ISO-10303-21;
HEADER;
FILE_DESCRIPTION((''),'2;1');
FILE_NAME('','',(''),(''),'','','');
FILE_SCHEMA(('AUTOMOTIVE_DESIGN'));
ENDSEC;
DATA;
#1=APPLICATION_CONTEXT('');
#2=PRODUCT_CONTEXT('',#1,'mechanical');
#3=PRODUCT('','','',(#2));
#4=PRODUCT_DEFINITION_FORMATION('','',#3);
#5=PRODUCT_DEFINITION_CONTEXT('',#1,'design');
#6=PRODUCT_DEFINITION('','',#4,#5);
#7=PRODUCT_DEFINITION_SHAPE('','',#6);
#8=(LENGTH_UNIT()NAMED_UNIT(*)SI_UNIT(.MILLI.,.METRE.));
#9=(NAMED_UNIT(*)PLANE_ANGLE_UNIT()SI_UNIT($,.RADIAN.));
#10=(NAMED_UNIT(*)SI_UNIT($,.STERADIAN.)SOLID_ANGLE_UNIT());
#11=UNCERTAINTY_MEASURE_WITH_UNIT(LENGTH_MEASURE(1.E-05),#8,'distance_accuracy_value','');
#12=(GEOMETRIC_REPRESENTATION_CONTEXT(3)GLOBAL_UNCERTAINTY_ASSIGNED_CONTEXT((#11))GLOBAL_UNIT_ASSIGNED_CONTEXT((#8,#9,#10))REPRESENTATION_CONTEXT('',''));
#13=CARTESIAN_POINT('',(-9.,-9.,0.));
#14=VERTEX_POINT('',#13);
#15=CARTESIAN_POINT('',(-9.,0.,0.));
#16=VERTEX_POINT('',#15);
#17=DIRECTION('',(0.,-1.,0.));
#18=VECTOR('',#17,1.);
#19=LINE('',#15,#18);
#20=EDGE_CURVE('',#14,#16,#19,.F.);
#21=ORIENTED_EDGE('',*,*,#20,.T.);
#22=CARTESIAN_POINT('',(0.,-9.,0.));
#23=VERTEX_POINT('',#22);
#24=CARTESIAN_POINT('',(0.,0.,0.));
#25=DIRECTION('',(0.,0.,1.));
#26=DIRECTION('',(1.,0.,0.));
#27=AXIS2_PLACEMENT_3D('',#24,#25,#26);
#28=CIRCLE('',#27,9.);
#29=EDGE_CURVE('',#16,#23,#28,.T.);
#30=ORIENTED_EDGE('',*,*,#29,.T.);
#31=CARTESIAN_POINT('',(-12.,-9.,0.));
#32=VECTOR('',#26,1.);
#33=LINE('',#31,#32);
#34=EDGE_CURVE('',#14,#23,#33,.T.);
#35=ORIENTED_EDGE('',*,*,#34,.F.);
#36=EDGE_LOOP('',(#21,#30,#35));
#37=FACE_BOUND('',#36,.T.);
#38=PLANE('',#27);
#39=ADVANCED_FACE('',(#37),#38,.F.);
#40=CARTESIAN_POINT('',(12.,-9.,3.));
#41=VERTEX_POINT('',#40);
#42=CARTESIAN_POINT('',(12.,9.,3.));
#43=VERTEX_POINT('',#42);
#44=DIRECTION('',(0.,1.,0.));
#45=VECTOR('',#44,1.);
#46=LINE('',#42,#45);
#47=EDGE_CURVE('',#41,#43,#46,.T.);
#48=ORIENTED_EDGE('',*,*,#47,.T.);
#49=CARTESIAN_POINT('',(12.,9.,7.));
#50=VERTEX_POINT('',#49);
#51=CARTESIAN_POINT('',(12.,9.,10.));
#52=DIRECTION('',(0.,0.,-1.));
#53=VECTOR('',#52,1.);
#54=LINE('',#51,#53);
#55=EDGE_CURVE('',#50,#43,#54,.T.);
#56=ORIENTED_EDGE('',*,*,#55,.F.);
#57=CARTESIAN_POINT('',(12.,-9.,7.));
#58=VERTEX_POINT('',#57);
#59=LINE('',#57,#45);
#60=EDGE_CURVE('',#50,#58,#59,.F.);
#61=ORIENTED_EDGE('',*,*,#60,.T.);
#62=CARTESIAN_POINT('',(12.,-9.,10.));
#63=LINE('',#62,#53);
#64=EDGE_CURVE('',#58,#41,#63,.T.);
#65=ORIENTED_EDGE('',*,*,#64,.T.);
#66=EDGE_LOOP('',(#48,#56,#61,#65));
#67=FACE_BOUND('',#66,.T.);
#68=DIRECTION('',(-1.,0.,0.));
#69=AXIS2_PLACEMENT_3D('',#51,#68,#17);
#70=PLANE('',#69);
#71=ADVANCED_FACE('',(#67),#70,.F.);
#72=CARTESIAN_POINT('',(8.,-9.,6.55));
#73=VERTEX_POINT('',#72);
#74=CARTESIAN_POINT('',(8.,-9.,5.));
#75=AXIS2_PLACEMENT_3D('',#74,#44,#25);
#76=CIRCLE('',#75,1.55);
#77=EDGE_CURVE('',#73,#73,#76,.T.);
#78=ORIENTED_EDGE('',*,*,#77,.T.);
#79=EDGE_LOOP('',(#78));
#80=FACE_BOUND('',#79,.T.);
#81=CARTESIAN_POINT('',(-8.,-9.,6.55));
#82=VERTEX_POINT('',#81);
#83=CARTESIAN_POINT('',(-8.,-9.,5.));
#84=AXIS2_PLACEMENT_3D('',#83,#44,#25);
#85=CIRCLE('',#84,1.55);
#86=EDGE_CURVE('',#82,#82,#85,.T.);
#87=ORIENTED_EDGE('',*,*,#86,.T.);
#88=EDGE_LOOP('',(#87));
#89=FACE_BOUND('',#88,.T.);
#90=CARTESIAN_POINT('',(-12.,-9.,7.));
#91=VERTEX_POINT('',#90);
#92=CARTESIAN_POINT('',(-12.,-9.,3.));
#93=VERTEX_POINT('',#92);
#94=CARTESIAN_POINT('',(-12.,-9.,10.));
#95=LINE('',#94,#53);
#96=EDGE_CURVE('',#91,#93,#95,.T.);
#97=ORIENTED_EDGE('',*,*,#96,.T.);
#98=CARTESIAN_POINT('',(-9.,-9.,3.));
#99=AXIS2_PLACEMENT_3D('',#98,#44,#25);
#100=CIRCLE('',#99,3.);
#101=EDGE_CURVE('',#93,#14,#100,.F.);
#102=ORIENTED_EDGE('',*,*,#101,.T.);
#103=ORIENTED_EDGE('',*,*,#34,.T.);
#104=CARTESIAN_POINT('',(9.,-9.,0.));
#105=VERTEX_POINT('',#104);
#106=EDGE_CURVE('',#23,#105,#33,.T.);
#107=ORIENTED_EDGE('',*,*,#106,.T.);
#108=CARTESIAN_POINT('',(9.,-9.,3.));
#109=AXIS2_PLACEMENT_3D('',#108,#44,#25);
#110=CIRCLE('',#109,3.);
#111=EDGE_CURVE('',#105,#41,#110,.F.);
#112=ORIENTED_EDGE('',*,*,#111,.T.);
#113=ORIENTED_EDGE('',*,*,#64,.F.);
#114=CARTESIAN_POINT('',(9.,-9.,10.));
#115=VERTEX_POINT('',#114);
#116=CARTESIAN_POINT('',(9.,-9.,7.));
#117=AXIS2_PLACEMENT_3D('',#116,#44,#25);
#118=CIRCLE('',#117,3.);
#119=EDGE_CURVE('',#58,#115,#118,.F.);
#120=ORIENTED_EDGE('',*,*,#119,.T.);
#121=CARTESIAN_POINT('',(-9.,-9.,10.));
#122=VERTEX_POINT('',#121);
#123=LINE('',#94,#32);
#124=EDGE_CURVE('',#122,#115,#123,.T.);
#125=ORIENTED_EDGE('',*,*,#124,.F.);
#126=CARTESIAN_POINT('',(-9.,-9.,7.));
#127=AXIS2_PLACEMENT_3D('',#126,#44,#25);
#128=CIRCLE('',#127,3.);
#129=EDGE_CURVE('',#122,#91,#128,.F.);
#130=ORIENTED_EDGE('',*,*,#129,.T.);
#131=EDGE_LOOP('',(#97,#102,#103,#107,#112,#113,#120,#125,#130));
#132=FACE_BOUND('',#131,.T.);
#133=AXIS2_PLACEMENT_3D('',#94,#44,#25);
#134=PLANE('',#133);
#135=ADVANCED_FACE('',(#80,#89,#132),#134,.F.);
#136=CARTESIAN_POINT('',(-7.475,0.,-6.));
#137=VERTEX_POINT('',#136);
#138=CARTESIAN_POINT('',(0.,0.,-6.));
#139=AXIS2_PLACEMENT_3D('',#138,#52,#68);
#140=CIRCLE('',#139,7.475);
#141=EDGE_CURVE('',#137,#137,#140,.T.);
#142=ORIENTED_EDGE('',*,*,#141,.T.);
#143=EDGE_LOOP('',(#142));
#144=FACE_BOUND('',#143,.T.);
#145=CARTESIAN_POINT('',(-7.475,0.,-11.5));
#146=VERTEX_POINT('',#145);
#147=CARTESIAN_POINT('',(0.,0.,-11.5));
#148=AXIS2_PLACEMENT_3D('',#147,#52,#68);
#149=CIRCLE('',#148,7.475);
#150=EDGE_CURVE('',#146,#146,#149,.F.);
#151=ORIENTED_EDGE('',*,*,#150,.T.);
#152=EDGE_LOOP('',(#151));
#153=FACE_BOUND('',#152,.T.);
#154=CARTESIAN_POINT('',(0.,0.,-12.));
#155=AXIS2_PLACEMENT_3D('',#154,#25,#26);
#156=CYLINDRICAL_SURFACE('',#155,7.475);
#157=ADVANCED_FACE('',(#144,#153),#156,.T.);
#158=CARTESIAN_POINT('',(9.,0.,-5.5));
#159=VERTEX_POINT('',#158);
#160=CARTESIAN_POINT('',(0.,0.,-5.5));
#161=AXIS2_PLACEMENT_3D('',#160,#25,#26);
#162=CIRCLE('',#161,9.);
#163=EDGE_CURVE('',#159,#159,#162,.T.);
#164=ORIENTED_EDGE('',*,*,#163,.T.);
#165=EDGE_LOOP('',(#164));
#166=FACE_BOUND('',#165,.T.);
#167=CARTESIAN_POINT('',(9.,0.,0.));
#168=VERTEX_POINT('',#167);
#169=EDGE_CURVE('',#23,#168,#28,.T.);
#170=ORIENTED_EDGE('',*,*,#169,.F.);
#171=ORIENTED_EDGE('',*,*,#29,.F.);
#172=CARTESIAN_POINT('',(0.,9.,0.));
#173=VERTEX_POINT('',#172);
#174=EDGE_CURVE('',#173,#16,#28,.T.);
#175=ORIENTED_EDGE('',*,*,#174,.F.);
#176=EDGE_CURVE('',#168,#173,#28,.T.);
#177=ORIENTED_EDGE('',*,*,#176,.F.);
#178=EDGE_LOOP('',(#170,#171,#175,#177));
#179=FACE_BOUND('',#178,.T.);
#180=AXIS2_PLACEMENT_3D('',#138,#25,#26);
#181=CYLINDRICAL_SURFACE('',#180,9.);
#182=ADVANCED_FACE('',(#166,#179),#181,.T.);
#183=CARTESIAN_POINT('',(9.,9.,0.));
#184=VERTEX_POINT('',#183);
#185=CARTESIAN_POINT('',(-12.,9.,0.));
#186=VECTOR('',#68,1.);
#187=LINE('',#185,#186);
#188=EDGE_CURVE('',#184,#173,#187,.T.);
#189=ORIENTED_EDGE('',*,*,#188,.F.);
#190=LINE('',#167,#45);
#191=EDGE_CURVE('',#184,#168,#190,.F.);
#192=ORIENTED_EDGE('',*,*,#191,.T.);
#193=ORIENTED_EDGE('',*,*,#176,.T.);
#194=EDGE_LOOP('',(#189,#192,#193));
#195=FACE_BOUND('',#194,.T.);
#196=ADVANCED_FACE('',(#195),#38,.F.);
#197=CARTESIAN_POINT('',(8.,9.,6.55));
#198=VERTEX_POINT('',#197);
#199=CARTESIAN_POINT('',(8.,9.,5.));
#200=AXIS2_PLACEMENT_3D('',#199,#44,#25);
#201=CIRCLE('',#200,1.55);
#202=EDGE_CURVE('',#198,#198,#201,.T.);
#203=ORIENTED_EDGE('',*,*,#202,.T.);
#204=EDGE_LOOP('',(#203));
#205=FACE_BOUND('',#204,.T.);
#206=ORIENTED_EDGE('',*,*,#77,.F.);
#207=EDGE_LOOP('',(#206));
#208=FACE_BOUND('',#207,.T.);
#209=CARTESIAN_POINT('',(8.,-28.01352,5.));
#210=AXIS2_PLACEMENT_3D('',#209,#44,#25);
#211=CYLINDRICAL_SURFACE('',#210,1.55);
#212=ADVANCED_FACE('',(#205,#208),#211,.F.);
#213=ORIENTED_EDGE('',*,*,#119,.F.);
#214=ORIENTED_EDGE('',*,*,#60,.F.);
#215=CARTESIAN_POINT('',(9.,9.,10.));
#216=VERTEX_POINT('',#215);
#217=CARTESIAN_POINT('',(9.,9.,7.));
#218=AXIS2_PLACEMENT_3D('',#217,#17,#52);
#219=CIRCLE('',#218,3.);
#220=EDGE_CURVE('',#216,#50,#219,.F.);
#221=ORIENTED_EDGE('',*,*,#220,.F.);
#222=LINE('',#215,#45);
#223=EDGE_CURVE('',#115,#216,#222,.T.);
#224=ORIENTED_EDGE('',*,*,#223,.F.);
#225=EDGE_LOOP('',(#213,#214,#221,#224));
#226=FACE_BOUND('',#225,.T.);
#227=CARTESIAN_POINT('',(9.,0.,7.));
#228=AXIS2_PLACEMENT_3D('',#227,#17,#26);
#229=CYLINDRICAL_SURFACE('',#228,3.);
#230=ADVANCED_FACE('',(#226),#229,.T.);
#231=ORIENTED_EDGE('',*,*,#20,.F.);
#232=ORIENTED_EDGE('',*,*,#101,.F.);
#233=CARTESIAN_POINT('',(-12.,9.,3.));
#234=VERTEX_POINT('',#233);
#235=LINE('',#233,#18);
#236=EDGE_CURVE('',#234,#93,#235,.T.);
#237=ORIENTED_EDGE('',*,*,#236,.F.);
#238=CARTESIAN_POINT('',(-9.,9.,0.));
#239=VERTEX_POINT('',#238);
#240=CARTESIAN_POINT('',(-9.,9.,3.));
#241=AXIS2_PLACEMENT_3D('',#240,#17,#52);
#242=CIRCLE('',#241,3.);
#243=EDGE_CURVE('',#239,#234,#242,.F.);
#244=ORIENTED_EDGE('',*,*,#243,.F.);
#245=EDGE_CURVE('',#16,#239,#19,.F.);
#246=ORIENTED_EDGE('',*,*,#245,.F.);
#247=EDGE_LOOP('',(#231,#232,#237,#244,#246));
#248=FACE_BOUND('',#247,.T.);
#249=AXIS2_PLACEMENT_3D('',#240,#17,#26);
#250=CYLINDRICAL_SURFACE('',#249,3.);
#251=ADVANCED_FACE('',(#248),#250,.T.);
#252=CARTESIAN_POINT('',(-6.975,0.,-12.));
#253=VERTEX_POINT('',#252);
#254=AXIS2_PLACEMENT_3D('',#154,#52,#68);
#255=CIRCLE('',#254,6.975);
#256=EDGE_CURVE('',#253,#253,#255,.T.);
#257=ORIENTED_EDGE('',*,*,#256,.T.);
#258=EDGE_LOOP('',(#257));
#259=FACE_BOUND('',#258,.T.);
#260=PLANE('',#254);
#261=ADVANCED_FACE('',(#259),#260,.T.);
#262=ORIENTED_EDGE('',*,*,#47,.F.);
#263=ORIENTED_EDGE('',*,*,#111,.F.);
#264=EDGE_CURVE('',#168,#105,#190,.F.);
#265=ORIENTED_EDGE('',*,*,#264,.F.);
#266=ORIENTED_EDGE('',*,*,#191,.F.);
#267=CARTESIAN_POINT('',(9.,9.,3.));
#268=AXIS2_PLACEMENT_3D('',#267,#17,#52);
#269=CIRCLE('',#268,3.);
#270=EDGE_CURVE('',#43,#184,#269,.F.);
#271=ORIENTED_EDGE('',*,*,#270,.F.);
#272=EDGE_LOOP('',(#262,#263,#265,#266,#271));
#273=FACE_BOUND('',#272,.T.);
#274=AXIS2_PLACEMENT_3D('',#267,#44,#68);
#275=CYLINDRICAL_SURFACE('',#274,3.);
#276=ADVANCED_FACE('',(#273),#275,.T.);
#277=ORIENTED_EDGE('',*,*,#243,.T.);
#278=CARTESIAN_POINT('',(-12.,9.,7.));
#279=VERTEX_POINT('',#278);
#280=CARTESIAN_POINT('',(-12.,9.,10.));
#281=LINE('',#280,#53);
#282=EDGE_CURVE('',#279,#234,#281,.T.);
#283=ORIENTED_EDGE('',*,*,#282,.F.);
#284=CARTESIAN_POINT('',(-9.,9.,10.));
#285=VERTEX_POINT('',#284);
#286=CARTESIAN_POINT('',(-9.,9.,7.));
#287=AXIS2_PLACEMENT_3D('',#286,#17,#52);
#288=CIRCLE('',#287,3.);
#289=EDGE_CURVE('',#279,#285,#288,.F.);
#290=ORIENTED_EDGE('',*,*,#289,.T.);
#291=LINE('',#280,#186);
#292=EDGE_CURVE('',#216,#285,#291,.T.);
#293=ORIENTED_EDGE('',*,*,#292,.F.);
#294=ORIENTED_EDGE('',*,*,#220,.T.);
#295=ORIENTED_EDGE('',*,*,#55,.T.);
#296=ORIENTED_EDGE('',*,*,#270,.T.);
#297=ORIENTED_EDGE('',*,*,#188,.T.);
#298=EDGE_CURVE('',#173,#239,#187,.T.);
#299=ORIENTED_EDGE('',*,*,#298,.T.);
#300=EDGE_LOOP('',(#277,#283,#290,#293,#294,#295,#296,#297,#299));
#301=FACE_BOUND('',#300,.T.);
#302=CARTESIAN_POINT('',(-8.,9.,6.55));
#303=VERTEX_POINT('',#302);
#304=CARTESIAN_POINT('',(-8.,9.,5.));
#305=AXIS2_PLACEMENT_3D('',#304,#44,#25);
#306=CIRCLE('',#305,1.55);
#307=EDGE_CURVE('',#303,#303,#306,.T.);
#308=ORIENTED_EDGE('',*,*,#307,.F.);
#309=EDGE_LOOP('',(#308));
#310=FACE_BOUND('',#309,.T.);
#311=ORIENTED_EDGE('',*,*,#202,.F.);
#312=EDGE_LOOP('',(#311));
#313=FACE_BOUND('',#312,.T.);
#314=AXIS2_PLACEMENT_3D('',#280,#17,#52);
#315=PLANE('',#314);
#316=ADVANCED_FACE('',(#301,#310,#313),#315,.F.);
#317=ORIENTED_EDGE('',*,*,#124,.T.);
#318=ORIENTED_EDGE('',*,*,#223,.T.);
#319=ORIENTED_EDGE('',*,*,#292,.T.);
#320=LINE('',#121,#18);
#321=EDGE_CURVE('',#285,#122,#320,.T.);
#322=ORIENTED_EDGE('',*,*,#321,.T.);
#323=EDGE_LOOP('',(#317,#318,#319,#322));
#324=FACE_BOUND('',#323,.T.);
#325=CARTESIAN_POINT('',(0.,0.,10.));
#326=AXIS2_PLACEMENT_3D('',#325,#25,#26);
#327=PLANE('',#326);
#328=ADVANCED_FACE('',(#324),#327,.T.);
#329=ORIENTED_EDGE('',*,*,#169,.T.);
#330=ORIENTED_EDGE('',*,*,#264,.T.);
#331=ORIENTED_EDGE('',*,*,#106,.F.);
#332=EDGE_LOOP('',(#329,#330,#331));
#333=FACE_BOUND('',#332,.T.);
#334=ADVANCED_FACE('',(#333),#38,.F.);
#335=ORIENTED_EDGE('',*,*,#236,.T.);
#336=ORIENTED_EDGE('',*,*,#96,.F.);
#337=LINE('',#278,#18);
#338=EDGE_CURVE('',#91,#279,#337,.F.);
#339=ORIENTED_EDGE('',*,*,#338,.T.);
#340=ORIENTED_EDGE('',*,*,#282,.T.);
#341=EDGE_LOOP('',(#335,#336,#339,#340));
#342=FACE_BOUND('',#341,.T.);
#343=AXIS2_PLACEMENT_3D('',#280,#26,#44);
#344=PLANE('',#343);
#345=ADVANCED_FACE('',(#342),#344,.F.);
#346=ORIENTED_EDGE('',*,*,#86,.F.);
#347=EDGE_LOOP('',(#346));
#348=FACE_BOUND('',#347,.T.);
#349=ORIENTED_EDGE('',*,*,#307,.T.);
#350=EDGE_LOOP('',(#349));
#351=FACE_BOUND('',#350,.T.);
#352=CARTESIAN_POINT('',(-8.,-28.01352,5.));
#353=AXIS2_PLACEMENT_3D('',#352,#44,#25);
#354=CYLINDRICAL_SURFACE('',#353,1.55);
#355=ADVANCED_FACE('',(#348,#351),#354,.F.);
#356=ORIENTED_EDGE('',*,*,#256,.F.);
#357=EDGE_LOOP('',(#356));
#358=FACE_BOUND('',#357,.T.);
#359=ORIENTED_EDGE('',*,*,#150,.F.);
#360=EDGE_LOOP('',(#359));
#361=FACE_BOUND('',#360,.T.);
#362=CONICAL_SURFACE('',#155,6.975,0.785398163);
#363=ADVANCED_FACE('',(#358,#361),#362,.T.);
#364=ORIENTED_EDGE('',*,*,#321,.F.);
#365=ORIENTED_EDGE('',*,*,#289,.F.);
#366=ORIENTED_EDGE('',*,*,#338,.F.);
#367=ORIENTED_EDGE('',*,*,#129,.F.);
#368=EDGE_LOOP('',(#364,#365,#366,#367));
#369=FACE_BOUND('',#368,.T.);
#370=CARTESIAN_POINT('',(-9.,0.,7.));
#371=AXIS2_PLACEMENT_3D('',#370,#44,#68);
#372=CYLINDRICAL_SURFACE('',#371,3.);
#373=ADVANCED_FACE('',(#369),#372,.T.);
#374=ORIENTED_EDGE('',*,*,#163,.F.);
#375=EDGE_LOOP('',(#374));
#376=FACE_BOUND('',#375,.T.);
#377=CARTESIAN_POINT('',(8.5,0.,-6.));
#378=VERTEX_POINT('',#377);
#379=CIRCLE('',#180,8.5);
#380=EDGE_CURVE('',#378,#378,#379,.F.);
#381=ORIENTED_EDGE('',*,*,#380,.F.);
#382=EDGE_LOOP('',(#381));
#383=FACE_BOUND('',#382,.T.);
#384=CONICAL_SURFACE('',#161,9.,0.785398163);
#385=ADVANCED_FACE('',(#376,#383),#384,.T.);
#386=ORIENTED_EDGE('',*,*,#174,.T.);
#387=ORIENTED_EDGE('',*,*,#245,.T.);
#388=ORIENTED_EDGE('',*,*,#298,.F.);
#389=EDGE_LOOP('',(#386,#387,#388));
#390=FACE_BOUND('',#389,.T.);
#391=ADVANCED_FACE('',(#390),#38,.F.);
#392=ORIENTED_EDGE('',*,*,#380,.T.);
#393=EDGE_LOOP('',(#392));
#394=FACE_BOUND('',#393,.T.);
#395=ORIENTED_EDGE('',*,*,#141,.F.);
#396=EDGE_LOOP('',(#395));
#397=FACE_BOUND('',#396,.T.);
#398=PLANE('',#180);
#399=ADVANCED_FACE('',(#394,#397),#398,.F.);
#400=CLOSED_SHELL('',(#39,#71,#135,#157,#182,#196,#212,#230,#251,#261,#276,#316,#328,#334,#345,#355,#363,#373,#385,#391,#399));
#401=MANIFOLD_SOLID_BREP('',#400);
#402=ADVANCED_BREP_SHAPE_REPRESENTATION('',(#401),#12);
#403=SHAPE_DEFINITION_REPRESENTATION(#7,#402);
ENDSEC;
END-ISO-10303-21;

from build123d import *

# Parameters (mm, degrees)
SKETCH_1_W          = 24
SKETCH_1_H          = 18
EXTRUDE_1_DEPTH     = 10
SKETCH_2_R          = 9
EXTRUDE_2_DEPTH     = 6
SKETCH_4_R          = 1.55
CUT_EXTRUDE_2_DEPTH = 37.013519789
SKETCH1_R           = 7.475
BOSS_EXTRUDE1_DEPTH = 6
CHAMFER1_SIZE       = 0.5
FILLET1_R           = 3


with BuildPart() as part:
    # 草图1 → 凸台-拉伸1 (new body)
    with BuildSketch(Plane.XY):
        Rectangle(SKETCH_1_W, SKETCH_1_H)
    extrude(amount=EXTRUDE_1_DEPTH)

    # 草图2 → 凸台-拉伸2 (add)
    with BuildSketch(Plane.XY):
        Circle(SKETCH_2_R)
    extrude(amount=-EXTRUDE_2_DEPTH)

    # 草图4 → 切除-拉伸2 (cut)
    with BuildSketch(Plane(origin=(0, 9, 0), x_dir=(1, 0, 0), z_dir=(0, 1, 0))):
        with Locations(Location((-8, -5, 0), (0, 0, 270))):
            Circle(SKETCH_4_R)
        with Locations(Location((8, -5, 0), (0, 0, 270))):
            Circle(SKETCH_4_R)
    extrude(amount=-CUT_EXTRUDE_2_DEPTH, mode=Mode.SUBTRACT)

    # Sketch1 → Boss-Extrude1 (add)
    with BuildSketch(Plane(origin=(0, 0, -6), x_dir=(-1, 0, 0), z_dir=(0, 0, -1))):
        Circle(SKETCH1_R)
    extrude(amount=BOSS_EXTRUDE1_DEPTH)

    # Chamfer1
    chamfer1_edges = [part.edges().sort_by_distance(p)[0] for p in [
        (-9, 0, -6),
        (7.475, 0, -12),
    ]]
    chamfer(chamfer1_edges, length=CHAMFER1_SIZE)

    # Fillet1
    fillet1_edges = [part.edges().sort_by_distance(p)[0] for p in [
        (-12, 0, 10),
        (12, 0, 10),
        (-12, 0, 0),
        (12, 0, 0),
    ]]
    fillet(fillet1_edges, radius=FILLET1_R - 0.0001)  # a hair under: the kernel refuses the full size


solid = part.part
